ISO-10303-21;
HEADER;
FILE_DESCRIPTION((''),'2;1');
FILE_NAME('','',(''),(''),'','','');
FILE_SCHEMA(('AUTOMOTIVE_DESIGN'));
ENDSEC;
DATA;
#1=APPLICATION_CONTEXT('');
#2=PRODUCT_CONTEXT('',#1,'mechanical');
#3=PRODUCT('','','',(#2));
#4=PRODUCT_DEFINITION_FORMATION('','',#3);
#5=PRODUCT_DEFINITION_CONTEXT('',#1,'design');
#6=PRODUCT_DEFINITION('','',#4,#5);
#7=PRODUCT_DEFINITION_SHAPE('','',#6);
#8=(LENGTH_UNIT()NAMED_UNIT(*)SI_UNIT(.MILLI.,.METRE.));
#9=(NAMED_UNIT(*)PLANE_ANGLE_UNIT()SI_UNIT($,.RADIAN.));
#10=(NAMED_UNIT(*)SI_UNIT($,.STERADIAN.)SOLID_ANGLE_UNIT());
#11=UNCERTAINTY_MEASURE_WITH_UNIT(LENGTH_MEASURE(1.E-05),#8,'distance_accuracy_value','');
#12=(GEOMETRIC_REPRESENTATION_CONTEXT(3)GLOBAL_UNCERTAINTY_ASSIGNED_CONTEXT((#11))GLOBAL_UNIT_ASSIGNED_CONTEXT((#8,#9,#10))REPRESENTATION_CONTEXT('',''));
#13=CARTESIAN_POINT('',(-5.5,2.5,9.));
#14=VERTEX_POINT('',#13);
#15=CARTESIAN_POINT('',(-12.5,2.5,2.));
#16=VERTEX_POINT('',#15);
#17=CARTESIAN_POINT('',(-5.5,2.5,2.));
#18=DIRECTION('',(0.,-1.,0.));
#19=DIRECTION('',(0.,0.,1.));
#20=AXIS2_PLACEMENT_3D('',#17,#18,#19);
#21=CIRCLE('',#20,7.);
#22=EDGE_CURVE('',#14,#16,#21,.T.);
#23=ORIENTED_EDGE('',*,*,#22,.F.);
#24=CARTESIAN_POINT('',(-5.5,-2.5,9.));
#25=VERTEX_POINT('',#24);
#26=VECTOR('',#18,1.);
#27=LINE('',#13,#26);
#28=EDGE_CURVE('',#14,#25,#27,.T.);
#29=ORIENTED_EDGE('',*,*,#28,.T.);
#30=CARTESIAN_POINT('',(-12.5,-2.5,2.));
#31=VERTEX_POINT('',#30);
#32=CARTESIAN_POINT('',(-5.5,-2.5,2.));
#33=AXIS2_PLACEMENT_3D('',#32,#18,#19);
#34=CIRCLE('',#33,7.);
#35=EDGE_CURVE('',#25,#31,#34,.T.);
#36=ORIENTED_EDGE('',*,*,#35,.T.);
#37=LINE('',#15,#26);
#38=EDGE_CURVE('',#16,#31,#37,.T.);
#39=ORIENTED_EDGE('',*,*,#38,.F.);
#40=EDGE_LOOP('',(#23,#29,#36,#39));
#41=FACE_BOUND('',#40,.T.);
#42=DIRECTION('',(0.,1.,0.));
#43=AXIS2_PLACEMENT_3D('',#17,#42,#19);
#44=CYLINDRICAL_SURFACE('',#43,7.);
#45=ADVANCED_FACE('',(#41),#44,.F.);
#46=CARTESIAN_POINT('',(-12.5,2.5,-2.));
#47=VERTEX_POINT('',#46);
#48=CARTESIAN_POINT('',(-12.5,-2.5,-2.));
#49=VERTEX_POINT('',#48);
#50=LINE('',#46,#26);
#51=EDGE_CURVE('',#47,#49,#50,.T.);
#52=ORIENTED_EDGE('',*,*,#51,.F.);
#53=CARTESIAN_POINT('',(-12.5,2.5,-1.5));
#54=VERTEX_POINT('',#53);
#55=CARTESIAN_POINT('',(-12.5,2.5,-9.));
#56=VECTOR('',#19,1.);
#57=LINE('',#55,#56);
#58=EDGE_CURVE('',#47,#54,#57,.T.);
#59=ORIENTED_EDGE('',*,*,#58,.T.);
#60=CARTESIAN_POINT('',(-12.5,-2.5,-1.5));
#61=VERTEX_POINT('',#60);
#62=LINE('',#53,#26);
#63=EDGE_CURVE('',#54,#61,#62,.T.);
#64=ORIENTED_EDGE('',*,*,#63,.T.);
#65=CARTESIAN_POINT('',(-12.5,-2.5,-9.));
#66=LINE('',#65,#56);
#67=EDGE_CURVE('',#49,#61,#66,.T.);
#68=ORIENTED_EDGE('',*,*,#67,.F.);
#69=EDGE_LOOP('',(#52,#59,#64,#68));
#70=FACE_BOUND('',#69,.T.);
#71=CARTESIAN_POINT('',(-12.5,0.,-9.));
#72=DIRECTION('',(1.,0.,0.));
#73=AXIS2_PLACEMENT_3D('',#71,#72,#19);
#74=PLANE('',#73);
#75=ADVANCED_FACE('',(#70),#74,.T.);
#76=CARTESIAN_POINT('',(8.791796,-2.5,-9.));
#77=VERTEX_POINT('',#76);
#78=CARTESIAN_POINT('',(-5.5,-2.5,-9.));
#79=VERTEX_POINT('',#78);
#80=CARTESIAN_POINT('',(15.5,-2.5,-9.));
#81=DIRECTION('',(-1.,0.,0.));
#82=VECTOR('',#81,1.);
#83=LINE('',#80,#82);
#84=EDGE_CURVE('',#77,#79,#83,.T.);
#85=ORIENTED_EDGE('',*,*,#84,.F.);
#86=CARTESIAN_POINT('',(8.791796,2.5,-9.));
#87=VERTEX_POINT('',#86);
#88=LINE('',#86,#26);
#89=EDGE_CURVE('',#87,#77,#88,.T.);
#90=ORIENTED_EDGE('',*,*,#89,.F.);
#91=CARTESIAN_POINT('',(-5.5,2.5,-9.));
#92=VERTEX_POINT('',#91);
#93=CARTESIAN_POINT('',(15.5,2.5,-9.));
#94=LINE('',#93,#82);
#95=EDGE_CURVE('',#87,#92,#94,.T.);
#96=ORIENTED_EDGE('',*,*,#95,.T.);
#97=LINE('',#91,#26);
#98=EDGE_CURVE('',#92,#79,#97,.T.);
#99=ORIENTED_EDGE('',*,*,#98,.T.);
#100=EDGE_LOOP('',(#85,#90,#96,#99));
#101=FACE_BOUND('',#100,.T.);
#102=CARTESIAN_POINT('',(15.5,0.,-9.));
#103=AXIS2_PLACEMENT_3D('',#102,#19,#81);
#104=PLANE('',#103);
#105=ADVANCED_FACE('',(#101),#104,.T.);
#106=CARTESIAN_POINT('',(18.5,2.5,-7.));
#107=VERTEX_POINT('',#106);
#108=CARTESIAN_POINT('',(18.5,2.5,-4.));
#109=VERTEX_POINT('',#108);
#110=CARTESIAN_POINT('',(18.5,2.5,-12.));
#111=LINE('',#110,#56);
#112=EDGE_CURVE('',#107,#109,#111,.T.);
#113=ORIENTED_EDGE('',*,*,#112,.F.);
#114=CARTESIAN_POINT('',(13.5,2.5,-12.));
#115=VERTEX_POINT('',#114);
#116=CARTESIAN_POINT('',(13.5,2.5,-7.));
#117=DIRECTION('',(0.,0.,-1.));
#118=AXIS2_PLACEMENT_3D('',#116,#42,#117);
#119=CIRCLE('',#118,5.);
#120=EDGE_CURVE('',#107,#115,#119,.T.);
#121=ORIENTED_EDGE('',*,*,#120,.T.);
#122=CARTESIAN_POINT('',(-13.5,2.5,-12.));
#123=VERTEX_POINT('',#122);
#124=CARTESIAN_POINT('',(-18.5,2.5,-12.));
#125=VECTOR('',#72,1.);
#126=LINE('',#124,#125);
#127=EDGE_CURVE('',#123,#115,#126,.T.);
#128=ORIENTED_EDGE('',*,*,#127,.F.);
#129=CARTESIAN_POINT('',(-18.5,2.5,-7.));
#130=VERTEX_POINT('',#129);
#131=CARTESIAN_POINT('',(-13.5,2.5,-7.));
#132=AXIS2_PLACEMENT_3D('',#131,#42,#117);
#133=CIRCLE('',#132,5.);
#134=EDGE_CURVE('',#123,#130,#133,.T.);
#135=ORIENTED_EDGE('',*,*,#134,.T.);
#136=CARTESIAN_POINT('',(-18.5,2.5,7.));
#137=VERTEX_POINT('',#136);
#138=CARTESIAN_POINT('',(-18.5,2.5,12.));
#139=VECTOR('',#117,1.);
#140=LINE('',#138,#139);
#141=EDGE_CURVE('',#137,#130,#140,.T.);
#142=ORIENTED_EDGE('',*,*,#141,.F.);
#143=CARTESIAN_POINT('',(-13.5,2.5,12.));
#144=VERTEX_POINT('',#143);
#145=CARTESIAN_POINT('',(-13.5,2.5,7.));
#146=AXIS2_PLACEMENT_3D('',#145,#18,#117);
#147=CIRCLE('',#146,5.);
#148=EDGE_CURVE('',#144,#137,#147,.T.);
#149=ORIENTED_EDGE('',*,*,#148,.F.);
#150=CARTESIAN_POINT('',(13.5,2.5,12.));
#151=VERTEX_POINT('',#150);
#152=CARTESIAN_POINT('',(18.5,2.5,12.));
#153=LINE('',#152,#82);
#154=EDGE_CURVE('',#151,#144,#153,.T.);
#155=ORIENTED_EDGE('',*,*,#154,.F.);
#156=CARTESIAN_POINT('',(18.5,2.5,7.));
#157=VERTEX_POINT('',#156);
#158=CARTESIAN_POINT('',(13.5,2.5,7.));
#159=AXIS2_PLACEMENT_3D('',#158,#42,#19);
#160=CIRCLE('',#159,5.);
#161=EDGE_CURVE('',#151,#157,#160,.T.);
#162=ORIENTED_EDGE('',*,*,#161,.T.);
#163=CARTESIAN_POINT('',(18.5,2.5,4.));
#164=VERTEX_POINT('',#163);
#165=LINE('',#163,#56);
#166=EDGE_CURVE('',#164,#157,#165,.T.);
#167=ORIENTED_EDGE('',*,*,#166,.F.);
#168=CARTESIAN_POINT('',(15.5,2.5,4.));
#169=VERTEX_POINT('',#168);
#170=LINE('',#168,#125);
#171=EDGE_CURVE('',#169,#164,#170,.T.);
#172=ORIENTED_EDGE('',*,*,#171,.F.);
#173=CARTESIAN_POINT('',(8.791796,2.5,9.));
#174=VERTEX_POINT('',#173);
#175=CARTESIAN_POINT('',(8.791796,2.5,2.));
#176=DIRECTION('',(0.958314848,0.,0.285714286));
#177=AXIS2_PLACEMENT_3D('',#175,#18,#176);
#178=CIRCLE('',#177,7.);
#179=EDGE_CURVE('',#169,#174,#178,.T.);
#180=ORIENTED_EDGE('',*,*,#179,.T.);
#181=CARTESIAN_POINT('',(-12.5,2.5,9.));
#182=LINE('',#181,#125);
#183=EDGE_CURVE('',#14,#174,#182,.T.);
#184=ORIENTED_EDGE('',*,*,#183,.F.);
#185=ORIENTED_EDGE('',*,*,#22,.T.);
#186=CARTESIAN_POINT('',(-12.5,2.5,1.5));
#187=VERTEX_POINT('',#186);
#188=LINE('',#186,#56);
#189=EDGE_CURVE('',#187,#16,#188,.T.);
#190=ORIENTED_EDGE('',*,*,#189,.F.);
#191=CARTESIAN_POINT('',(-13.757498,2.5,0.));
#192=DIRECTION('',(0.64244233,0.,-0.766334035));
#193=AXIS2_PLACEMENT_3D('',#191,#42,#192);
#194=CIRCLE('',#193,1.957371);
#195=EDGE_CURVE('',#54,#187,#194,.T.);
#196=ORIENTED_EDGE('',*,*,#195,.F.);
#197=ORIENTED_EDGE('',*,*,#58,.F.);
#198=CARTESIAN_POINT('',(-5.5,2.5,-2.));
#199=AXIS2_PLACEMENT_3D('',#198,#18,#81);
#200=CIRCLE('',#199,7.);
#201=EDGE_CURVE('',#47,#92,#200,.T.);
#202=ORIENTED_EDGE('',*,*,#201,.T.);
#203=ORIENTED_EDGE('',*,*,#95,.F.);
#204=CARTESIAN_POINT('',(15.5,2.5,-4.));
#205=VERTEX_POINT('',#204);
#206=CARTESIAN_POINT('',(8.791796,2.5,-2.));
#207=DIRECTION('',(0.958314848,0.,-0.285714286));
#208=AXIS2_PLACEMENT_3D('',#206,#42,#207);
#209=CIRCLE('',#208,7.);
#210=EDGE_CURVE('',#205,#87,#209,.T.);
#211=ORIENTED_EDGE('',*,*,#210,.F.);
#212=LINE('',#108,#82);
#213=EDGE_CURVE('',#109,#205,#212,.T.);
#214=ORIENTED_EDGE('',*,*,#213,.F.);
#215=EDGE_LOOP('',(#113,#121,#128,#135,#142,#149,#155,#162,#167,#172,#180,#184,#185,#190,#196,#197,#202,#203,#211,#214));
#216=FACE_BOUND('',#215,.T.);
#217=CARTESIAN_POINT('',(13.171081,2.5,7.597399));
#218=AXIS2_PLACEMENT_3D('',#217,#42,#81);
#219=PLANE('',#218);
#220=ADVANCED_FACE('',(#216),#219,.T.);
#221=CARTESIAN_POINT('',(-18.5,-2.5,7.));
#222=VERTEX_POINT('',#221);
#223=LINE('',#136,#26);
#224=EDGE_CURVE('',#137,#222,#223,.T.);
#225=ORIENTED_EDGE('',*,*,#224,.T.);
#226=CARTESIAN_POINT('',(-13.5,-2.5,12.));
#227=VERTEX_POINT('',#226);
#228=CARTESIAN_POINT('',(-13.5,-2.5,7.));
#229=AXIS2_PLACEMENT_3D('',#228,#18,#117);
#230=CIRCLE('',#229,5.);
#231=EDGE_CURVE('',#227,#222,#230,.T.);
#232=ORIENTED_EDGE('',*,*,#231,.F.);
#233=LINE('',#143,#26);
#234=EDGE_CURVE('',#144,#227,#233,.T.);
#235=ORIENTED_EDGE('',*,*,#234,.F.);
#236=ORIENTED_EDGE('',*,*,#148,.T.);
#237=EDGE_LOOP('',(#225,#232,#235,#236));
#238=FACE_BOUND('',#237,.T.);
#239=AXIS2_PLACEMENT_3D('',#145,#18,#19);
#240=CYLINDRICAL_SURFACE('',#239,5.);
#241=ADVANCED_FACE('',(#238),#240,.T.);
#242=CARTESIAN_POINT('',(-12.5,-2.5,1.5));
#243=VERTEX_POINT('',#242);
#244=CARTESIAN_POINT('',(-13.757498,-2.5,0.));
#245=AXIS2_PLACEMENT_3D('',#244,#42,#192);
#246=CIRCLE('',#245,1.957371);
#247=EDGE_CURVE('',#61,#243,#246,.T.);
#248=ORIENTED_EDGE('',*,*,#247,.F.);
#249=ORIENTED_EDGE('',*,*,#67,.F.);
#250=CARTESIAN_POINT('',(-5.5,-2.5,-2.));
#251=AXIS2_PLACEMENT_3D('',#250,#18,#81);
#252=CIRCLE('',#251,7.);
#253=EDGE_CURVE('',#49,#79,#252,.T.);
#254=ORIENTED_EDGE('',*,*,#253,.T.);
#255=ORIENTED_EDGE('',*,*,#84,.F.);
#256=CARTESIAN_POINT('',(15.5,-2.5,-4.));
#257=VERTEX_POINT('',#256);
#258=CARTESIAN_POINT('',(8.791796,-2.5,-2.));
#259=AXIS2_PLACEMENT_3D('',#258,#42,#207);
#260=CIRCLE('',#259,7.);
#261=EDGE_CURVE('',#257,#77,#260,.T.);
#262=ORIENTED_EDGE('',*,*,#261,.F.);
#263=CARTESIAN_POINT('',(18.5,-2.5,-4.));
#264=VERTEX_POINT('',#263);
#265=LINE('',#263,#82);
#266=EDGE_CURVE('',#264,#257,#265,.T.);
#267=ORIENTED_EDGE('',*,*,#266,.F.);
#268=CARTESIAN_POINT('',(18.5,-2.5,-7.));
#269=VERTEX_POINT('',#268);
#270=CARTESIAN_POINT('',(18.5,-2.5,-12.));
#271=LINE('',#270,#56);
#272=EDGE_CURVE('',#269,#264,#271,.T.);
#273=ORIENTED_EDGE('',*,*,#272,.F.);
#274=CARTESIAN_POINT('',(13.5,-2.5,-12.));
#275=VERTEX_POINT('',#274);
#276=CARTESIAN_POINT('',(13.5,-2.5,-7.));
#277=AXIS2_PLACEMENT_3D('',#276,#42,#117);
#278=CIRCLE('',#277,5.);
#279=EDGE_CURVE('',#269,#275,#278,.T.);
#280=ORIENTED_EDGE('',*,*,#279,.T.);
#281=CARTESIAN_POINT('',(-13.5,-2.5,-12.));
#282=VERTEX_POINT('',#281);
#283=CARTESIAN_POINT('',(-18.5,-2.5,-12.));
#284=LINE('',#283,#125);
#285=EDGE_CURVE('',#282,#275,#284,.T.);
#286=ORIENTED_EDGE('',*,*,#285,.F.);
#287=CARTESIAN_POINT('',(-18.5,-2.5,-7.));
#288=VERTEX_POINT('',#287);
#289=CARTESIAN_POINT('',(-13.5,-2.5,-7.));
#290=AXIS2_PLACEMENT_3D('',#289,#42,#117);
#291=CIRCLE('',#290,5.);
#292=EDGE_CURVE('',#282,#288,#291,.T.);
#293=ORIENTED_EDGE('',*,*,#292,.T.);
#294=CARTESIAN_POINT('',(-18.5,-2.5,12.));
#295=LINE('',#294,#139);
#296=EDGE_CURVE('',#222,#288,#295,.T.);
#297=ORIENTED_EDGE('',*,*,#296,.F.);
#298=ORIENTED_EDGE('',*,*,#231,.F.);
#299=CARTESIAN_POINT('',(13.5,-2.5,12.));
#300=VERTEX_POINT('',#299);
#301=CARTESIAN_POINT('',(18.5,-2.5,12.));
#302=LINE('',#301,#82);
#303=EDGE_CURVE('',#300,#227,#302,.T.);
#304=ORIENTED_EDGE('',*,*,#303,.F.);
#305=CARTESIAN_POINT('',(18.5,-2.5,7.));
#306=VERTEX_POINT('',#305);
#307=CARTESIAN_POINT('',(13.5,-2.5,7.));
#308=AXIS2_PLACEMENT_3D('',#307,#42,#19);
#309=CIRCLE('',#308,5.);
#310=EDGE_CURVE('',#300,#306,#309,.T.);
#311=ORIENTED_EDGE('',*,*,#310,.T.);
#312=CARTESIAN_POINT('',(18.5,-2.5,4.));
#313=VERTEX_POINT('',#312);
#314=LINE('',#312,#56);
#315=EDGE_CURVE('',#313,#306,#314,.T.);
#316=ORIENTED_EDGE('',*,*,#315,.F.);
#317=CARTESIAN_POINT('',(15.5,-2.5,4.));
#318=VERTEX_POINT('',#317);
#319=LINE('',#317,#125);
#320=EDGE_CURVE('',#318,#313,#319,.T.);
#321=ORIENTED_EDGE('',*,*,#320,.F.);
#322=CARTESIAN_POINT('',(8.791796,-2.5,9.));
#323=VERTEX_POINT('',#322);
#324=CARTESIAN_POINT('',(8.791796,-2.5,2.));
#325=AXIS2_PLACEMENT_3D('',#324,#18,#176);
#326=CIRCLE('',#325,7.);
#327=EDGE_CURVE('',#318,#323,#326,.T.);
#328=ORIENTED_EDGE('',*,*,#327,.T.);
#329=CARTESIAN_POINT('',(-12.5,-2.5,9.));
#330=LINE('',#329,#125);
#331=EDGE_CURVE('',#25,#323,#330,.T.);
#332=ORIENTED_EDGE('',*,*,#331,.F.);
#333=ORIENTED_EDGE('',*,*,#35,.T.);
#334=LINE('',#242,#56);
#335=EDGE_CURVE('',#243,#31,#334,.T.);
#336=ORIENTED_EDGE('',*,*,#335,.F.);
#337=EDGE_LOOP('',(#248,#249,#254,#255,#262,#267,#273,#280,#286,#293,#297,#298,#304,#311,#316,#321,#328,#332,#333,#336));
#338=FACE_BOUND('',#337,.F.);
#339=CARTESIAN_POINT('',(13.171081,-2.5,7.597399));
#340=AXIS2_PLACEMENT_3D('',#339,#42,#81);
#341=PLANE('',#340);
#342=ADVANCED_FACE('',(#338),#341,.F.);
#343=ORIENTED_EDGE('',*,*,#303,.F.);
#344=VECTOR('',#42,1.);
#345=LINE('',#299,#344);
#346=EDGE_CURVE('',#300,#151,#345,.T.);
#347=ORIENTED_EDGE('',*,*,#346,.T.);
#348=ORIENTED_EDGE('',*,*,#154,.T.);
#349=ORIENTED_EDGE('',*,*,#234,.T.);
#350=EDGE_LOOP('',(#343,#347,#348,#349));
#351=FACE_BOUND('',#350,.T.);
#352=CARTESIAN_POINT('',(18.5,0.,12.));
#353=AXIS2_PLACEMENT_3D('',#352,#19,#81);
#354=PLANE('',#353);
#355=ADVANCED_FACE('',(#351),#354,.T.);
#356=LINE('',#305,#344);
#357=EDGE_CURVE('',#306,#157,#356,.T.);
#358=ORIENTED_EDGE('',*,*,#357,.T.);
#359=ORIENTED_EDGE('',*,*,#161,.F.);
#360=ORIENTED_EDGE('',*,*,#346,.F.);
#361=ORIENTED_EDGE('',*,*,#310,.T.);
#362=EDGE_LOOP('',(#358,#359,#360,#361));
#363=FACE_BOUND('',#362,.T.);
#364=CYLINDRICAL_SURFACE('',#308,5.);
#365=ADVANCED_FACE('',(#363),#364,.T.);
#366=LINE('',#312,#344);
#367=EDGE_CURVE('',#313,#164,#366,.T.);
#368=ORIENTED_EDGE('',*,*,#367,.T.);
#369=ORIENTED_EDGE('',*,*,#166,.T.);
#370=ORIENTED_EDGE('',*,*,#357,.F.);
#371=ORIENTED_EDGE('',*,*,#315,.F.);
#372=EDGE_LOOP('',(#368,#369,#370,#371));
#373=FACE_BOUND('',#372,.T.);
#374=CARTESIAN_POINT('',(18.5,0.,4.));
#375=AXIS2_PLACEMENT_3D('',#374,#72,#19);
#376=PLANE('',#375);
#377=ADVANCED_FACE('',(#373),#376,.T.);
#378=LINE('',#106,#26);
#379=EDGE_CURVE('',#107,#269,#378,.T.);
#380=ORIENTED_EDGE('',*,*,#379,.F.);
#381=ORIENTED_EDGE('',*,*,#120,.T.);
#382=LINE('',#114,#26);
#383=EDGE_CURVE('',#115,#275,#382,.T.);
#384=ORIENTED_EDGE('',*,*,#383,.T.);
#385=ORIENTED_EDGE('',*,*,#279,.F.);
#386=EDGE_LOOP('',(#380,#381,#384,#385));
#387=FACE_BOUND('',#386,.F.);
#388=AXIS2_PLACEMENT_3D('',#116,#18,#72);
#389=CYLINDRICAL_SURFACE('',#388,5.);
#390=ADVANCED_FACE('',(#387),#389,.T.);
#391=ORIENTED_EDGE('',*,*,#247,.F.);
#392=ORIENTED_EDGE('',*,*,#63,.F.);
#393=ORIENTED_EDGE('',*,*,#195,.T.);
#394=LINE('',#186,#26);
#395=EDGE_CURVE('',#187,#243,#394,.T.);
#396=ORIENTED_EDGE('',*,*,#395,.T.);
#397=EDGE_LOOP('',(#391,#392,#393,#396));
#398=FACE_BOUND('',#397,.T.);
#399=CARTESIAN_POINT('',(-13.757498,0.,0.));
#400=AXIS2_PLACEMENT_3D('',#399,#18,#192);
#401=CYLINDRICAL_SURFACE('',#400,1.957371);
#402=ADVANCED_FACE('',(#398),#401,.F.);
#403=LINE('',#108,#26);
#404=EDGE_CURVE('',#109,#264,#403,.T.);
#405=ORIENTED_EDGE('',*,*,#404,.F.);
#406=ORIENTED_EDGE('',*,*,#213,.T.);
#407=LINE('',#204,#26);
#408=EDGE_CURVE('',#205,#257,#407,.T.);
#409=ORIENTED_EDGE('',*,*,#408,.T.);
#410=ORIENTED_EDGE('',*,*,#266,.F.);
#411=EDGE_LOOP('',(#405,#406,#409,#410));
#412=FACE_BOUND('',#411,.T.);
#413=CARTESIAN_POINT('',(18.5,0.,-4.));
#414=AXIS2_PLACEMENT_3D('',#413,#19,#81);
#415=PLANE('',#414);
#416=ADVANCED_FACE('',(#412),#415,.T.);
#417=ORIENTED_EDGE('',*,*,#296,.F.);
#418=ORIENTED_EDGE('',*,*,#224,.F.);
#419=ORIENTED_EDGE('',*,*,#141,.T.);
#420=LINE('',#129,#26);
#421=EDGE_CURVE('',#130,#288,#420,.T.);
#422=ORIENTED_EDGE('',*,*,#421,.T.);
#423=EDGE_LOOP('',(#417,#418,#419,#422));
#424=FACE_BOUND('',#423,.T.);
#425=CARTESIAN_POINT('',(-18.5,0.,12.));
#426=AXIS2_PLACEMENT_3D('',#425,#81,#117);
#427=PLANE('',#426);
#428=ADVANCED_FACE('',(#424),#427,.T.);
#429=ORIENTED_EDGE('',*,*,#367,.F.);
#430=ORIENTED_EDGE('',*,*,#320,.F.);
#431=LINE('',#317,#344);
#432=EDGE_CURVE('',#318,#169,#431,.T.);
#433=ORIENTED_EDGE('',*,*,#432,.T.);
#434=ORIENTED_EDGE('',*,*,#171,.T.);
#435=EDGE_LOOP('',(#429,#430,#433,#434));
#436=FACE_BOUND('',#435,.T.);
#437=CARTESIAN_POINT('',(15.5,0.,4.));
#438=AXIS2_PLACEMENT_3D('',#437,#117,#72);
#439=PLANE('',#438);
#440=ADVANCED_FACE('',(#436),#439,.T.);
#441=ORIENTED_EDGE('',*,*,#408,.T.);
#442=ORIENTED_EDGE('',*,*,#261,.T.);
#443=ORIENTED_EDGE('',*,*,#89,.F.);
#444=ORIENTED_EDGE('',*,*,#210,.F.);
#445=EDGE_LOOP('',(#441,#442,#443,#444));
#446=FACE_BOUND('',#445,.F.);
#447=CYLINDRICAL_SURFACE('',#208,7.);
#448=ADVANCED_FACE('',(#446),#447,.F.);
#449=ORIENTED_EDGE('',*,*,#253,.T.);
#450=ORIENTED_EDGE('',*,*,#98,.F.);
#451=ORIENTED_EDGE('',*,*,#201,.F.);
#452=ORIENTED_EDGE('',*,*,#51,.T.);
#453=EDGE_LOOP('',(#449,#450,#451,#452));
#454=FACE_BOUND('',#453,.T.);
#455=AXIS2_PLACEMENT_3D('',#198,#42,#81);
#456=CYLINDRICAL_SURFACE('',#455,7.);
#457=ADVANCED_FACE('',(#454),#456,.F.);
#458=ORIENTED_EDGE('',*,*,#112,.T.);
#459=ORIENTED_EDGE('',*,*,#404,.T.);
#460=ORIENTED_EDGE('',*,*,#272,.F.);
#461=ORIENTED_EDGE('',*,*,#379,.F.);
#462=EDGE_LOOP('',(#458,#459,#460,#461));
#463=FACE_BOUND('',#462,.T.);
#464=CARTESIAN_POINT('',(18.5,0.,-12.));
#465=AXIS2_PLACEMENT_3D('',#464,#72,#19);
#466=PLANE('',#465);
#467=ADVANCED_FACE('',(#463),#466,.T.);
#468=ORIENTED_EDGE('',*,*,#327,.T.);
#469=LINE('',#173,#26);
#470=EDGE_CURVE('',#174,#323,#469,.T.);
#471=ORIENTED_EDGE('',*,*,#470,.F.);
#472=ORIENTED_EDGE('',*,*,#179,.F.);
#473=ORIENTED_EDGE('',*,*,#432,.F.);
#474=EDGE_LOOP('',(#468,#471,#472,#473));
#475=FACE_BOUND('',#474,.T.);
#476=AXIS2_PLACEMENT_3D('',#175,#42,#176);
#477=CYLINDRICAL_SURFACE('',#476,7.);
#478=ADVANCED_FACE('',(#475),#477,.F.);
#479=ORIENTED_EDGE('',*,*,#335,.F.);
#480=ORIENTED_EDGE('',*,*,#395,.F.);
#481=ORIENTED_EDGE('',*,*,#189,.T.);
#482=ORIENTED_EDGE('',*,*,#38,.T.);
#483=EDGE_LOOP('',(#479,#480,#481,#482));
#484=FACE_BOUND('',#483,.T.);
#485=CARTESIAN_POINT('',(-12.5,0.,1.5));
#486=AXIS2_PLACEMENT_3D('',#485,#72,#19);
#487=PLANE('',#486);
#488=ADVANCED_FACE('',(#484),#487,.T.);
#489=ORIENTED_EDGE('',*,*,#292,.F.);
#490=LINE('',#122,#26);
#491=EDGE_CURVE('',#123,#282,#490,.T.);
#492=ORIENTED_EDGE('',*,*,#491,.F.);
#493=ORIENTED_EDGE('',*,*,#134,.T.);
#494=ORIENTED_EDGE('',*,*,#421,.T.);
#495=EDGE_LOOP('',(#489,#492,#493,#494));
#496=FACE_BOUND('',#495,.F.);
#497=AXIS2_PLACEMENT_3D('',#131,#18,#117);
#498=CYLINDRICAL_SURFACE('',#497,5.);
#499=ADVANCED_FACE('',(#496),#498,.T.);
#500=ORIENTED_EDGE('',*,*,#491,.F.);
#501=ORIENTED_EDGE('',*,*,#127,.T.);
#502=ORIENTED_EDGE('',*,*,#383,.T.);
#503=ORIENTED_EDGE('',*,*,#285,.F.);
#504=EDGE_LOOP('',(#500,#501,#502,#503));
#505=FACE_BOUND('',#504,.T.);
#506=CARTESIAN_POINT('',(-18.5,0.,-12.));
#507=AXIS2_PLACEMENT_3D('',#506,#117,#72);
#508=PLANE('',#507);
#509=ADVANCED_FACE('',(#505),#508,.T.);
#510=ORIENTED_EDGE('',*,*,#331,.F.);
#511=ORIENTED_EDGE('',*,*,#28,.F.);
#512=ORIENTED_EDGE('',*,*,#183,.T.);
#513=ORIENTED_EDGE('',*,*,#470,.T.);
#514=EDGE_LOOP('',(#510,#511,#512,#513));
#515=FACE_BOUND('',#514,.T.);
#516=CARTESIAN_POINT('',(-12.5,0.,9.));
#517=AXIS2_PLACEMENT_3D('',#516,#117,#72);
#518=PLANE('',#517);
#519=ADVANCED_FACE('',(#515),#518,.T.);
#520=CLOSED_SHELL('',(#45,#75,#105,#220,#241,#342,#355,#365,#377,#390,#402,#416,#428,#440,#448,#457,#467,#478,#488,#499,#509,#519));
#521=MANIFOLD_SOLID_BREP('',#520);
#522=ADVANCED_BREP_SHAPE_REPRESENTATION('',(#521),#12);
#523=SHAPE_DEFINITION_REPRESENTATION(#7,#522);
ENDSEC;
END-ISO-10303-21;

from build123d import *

# Parameters (mm, degrees)
F1_DEPTH    = 2.5
F2_R        = 5
F3_T1_DEPTH = 5


# Not quite as in the source:
# - a fillet or chamfer that OpenCascade refuses, or shapes differently, is made with other operations: its cross-section is extruded or revolved along the edge and cut away or added


with BuildPart() as f1:
    # F0 (on Front) → F1 (new body, symmetric)
    with BuildSketch(Plane.XZ):
        with BuildLine():
            Line((18.5, 12), (-18.5, 12))
            Line((-18.5, 12), (-18.5, -12))
            Line((-18.5, -12), (18.5, -12))
            Line((18.5, -12), (18.5, -4))
            Line((18.5, -4), (15.5, -4))
            Line((15.5, -4), (15.5, -9))
            Line((15.5, -9), (-12.5, -9))
            Line((-12.5, -9), (-12.5, -1.5))
            ThreePointArc((-12.5, -1.5), (-15.714868952, 0), (-12.5, 1.5))
            Line((-12.5, 1.5), (-12.5, 9))
            Line((-12.5, 9), (15.5, 9))
            Line((15.5, 9), (15.5, 4))
            Line((15.5, 4), (18.5, 4))
            Line((18.5, 4), (18.5, 12))
        make_face()
    extrude(amount=F1_DEPTH, both=True)

    # F2
    f2_edges = [f1.edges().sort_by_distance(p)[0] for p in [
        (-18.5, 0, 12),
        (18.5, 0, 12),
        (18.5, 0, -12),
        (-18.5, 0, -12),
    ]]
    fillet(f2_edges, radius=F2_R)

    # F3: fillet of radius 7 on 4 edges, made by hand

    # F3_s2 → F3_t1 (join)
    with BuildSketch(Plane.XZ.offset(-2.5)):
        with BuildLine():
            ThreePointArc((15.5, 4), (12.9750962002, 7.6124860802), (8.7917960675, 9))
            Line((8.7917960675, 9), (15.5, 9))
            Line((15.5, 9), (15.5, 4))
        make_face()
        with BuildLine():
            ThreePointArc((15.5, -4), (12.9750962002, -7.6124860802), (8.7917960675, -9))
            Line((8.7917960675, -9), (15.5, -9))
            Line((15.5, -9), (15.5, -4))
        make_face()
        with BuildLine():
            ThreePointArc((-12.5, -2), (-10.4497474683, -6.9497474683), (-5.5, -9))
            Line((-5.5, -9), (-12.5, -9))
            Line((-12.5, -9), (-12.5, -2))
        make_face()
        with BuildLine():
            ThreePointArc((-5.5, 9), (-10.4497474683, 6.9497474683), (-12.5, 2))
            Line((-12.5, 2), (-12.5, 9))
            Line((-12.5, 9), (-5.5, 9))
        make_face()
    extrude(amount=F3_T1_DEPTH)


solid = f1.part
